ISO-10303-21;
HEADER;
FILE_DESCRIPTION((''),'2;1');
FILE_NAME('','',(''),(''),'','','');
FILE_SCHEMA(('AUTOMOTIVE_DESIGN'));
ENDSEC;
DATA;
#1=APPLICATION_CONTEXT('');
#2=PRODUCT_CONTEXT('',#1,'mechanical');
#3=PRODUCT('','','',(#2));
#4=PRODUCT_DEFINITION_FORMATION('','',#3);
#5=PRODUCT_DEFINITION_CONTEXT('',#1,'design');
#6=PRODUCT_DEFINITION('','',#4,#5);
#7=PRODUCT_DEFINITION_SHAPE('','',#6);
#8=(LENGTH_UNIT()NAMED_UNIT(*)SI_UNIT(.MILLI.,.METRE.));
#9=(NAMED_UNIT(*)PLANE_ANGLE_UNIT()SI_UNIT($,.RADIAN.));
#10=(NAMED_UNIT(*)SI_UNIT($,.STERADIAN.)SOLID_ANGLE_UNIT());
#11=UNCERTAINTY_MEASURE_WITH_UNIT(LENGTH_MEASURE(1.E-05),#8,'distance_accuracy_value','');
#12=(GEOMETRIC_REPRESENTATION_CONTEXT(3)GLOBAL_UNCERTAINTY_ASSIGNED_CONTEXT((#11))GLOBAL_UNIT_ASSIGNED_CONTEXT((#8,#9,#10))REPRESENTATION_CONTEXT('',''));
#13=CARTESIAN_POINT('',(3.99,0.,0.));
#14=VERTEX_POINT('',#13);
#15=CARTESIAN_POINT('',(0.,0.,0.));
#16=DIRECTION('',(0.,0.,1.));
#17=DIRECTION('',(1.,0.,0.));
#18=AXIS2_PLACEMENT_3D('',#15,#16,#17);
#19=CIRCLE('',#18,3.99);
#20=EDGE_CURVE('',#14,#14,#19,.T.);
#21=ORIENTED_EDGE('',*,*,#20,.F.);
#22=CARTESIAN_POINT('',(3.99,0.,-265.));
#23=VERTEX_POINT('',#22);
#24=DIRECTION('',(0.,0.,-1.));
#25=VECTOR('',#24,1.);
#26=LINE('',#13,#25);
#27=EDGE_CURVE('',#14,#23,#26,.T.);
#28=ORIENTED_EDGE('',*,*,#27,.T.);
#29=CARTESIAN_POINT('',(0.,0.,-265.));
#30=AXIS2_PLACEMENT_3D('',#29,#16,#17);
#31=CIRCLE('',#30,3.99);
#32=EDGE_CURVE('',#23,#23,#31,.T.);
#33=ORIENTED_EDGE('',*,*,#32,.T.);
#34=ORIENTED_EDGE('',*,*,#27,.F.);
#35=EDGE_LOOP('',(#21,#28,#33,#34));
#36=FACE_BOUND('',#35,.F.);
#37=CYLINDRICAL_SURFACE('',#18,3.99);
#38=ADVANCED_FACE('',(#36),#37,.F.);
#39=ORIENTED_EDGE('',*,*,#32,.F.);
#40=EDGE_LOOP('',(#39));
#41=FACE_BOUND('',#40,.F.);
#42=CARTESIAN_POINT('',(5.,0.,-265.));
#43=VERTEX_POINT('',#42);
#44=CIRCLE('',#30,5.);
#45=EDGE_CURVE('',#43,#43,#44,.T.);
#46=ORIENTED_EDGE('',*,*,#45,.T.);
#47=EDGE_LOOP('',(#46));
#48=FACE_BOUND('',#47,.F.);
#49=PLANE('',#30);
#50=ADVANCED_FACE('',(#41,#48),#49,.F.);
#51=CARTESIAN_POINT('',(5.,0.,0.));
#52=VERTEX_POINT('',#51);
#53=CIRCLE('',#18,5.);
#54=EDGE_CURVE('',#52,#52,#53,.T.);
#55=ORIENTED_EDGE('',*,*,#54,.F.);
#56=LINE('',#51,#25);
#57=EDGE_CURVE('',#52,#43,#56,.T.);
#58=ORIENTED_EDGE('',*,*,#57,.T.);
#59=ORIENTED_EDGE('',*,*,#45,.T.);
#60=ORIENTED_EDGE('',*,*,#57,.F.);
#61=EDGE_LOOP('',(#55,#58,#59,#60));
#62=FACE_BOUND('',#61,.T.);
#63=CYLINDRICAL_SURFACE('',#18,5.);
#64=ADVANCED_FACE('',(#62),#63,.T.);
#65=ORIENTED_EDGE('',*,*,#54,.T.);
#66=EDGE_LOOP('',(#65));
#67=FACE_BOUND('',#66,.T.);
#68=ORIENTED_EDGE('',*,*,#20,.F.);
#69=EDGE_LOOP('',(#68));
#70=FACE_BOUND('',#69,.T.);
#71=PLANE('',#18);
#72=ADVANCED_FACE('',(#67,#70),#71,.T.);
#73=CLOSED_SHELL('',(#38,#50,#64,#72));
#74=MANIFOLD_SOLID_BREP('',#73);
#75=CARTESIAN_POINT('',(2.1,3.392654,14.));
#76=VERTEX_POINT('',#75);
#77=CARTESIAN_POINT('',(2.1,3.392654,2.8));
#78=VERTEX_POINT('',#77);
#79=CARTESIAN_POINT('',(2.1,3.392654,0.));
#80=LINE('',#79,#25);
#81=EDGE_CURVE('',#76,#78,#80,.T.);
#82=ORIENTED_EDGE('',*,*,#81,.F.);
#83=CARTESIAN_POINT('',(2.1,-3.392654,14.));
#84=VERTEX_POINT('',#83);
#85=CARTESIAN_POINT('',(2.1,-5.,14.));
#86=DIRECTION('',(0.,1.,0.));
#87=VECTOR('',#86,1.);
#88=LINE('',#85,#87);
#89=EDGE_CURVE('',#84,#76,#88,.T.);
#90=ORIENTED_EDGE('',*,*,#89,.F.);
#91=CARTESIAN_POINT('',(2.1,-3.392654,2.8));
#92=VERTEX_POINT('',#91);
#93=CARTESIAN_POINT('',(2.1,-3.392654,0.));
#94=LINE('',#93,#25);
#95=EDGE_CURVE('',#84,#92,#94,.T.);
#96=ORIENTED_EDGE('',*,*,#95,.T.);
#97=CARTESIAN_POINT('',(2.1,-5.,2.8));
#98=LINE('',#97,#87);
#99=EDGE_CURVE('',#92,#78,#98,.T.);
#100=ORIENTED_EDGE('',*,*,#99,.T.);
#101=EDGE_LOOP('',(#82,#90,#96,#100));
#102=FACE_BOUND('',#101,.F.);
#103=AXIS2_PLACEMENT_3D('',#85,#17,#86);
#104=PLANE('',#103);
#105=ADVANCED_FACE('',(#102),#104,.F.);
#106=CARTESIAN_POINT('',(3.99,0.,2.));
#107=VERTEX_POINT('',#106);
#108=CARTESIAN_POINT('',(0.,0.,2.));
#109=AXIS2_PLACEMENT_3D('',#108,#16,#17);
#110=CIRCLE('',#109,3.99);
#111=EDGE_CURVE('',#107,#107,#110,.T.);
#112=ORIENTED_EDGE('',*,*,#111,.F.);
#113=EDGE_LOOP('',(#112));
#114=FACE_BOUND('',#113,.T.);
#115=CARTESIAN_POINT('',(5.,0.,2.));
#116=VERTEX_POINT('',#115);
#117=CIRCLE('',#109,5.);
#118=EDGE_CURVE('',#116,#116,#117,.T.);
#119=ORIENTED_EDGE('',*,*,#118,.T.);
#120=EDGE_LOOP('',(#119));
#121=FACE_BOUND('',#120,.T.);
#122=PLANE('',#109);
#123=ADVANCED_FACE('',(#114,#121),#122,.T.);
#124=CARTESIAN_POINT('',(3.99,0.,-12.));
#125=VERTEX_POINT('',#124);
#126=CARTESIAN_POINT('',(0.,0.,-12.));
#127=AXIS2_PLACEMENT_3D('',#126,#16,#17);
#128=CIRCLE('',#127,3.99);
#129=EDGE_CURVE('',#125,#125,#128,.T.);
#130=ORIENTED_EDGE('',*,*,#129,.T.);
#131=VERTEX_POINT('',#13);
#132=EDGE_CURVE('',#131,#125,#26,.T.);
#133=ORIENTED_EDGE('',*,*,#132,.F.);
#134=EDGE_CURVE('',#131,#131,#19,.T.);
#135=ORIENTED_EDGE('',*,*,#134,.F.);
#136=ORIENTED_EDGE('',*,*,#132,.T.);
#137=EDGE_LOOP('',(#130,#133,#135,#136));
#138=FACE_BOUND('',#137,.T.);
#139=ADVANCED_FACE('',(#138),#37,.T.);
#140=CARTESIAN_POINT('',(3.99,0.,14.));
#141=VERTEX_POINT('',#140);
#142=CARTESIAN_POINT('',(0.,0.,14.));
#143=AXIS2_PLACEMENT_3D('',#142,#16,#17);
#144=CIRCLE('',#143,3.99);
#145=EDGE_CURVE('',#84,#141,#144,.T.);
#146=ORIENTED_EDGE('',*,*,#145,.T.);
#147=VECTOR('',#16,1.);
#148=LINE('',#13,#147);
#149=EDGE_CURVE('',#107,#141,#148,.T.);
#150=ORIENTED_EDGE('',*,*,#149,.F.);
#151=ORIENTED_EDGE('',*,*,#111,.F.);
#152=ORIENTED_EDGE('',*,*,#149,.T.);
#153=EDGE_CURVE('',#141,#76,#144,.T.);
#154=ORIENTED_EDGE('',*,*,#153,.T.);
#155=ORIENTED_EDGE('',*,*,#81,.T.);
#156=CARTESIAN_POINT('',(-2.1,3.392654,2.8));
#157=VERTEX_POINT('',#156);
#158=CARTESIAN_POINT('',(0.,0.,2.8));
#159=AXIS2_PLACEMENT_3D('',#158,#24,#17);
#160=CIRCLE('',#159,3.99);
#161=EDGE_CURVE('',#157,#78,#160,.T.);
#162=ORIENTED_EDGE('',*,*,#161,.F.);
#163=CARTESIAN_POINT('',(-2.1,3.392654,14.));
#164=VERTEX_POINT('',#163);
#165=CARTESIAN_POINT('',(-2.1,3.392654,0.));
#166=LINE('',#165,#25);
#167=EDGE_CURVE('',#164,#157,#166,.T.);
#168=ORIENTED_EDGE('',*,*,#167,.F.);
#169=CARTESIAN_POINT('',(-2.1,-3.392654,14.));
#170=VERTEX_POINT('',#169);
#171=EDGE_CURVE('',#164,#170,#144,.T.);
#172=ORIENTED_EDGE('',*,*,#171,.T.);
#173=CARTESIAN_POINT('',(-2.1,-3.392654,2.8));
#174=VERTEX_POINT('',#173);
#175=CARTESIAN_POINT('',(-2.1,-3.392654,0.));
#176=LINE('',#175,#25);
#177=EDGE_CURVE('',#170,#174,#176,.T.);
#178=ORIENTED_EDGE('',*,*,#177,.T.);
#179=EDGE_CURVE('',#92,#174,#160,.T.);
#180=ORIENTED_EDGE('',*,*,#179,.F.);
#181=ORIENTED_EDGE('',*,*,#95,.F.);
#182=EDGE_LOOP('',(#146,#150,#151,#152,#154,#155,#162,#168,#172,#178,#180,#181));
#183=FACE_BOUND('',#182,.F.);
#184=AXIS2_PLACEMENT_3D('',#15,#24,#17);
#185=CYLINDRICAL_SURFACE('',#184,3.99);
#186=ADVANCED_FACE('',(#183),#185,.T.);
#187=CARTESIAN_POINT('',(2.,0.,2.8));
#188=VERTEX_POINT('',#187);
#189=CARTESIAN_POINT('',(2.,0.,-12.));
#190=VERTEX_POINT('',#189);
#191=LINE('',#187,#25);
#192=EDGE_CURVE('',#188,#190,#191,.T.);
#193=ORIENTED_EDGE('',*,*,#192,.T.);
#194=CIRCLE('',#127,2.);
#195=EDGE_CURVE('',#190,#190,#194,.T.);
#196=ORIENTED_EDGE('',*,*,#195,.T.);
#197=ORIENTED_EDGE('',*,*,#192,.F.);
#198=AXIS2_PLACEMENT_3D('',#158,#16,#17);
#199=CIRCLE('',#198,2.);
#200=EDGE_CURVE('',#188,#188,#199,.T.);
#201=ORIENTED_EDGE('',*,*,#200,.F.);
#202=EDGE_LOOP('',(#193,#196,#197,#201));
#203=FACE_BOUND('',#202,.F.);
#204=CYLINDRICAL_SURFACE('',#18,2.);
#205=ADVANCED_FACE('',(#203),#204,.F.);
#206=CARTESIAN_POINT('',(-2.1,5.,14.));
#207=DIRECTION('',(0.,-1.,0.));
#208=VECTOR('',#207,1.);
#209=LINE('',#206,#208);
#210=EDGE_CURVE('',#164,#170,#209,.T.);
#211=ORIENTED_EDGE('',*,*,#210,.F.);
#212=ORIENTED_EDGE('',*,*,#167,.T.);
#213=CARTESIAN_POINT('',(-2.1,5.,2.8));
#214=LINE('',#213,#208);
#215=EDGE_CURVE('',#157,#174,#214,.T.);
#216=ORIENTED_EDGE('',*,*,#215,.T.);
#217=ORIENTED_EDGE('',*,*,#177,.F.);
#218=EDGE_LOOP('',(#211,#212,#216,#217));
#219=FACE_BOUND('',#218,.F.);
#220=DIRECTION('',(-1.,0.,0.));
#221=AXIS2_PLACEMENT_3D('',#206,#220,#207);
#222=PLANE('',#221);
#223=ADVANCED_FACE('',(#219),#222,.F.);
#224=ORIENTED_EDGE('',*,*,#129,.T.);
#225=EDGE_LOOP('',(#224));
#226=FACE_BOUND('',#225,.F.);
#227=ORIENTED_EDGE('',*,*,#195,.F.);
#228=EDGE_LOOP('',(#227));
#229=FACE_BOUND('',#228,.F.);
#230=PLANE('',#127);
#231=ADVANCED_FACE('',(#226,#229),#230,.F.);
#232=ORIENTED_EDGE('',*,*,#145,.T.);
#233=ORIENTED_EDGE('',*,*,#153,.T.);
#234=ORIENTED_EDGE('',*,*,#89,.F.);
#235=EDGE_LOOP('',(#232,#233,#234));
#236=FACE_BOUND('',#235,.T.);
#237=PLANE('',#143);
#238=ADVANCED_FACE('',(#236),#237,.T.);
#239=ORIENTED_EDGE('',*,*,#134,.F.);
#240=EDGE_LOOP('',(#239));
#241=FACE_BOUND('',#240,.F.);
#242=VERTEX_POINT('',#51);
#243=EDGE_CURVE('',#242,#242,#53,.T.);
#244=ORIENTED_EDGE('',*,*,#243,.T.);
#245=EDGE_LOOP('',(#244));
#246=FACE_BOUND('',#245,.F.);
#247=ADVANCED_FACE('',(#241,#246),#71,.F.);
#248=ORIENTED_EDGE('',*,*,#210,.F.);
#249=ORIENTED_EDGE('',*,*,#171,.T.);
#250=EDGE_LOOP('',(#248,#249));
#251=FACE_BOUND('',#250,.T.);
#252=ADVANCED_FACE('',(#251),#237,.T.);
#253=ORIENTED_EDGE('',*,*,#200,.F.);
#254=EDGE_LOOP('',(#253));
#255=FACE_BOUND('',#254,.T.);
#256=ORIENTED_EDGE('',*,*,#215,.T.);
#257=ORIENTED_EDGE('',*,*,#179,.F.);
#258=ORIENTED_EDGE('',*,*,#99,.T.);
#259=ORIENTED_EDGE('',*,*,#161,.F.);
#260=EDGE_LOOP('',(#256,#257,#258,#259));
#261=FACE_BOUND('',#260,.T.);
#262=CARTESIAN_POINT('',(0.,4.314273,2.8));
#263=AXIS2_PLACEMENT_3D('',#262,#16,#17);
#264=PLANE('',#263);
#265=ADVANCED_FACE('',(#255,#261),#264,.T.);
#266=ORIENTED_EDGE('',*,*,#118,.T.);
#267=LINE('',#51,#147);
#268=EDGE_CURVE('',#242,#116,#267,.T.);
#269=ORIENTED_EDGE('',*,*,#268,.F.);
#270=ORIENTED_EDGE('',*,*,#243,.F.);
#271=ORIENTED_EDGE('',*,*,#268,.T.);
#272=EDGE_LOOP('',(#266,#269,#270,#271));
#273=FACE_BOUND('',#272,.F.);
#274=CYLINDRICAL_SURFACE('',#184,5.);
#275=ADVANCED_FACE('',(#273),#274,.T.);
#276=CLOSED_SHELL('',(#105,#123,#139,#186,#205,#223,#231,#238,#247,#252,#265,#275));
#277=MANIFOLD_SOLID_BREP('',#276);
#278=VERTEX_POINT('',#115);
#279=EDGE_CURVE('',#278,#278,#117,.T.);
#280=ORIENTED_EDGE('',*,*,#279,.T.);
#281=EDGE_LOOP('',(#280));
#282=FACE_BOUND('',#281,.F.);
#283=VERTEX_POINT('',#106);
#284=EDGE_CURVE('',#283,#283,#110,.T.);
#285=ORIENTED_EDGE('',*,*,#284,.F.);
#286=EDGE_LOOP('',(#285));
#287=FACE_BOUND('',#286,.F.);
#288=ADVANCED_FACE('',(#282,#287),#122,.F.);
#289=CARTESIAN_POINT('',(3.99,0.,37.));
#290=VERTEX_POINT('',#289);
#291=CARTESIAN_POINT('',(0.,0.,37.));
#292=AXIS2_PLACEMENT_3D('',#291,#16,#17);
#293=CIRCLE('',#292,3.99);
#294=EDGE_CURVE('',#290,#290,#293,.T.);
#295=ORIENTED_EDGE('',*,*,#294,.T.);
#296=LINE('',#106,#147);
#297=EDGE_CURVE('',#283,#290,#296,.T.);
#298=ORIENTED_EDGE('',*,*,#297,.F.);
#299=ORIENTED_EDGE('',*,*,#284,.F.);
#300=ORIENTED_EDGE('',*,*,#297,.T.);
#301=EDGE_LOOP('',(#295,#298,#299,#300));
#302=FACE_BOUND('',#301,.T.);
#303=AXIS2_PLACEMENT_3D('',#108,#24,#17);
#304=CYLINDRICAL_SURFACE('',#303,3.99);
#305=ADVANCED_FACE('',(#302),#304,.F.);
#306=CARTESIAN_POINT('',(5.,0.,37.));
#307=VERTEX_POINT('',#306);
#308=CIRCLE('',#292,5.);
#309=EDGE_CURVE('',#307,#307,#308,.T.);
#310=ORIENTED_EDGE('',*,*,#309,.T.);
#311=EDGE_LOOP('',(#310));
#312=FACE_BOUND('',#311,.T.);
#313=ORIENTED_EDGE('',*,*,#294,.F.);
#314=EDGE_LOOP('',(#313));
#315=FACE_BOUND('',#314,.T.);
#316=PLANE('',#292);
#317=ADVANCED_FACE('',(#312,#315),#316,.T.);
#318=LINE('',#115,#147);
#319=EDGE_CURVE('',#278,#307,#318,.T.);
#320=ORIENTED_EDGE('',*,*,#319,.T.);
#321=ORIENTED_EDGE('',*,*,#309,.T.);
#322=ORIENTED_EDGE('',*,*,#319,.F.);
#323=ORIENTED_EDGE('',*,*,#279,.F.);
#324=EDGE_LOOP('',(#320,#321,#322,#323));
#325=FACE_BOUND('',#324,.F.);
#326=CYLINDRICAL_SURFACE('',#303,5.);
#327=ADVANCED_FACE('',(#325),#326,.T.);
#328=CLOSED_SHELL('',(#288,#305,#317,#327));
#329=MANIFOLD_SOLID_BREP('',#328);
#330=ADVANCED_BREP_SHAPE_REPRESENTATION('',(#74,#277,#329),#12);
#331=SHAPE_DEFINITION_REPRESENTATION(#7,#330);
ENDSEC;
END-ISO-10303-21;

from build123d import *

# Parameters (mm, degrees)
F0_R     = 3.99
F0_R_2   = 2
F1_DEPTH = 14
F2_R     = 2
F3_DEPTH = 11.2
F0_R_3   = 5
F4_DEPTH = 2
F5_DEPTH = 12
F6_DEPTH = 35
F7_DEPTH = 265


# Not quite as in the source:
# - a feature names something its author has since deleted; it is built from what else it names


with BuildPart() as f1:
    # F0 (on Top) → F1 (new body)
    with BuildSketch(Plane.XY):
        Circle(F0_R)
        Circle(F0_R_2, mode=Mode.SUBTRACT)
    extrude(amount=F1_DEPTH)

    # F2 (on face) → F3 (cut)
    with BuildSketch(Plane.XY.offset(14)):
        with BuildLine():
            ThreePointArc((-2.1, 3.3926538285), (0, 3.99), (2.1, 3.3926538285))
            Line((2.1, 3.3926538285), (2.1, 5))
            Line((2.1, 5), (-2.1, 5))
            Line((-2.1, 5), (-2.1, 3.3926538285))
        make_face()
        with BuildLine():
            Line((2.1, -3.3926538285), (2.1, 3.3926538285))
            ThreePointArc((2.1, 3.3926538285), (0, 3.99), (-2.1, 3.3926538285))
            Line((-2.1, 3.3926538285), (-2.1, -3.3926538285))
            ThreePointArc((-2.1, -3.3926538285), (0, -3.99), (2.1, -3.3926538285))
        make_face()
        Circle(F2_R, mode=Mode.SUBTRACT)
        with BuildLine():
            Line((2.1, -5), (2.1, -3.3926538285))
            ThreePointArc((2.1, -3.3926538285), (0, -3.99), (-2.1, -3.3926538285))
            Line((-2.1, -3.3926538285), (-2.1, -5))
            Line((-2.1, -5), (2.1, -5))
        make_face()
    extrude(amount=-F3_DEPTH, mode=Mode.SUBTRACT)

    # F0 (on Top) → F4 (join)
    with BuildSketch(Plane.XY):
        Circle(F0_R_3)
        Circle(F0_R, mode=Mode.SUBTRACT)
    extrude(amount=F4_DEPTH)

    # F0 (on Top) → F5 (join)
    with BuildSketch(Plane.XY):
        Circle(F0_R)
        Circle(F0_R_2, mode=Mode.SUBTRACT)
    extrude(amount=-F5_DEPTH)


with BuildPart() as f6:
    # F6 (new): a face of the model
    f6_faces = [f1.part.faces().sort_by_distance(p)[0] for p in [
        (-4.8585786438, 0, 2),
    ]]
    extrude(f6_faces, amount=F6_DEPTH)


with BuildPart() as f7:
    # F7 (new): a face of the model
    f7_faces = [f1.part.faces().sort_by_distance(p)[0] for p in [
        (-4.8585786438, 0, 0),
    ]]
    extrude(f7_faces, amount=F7_DEPTH)


solid = Compound([f1.part, f6.part, f7.part])
